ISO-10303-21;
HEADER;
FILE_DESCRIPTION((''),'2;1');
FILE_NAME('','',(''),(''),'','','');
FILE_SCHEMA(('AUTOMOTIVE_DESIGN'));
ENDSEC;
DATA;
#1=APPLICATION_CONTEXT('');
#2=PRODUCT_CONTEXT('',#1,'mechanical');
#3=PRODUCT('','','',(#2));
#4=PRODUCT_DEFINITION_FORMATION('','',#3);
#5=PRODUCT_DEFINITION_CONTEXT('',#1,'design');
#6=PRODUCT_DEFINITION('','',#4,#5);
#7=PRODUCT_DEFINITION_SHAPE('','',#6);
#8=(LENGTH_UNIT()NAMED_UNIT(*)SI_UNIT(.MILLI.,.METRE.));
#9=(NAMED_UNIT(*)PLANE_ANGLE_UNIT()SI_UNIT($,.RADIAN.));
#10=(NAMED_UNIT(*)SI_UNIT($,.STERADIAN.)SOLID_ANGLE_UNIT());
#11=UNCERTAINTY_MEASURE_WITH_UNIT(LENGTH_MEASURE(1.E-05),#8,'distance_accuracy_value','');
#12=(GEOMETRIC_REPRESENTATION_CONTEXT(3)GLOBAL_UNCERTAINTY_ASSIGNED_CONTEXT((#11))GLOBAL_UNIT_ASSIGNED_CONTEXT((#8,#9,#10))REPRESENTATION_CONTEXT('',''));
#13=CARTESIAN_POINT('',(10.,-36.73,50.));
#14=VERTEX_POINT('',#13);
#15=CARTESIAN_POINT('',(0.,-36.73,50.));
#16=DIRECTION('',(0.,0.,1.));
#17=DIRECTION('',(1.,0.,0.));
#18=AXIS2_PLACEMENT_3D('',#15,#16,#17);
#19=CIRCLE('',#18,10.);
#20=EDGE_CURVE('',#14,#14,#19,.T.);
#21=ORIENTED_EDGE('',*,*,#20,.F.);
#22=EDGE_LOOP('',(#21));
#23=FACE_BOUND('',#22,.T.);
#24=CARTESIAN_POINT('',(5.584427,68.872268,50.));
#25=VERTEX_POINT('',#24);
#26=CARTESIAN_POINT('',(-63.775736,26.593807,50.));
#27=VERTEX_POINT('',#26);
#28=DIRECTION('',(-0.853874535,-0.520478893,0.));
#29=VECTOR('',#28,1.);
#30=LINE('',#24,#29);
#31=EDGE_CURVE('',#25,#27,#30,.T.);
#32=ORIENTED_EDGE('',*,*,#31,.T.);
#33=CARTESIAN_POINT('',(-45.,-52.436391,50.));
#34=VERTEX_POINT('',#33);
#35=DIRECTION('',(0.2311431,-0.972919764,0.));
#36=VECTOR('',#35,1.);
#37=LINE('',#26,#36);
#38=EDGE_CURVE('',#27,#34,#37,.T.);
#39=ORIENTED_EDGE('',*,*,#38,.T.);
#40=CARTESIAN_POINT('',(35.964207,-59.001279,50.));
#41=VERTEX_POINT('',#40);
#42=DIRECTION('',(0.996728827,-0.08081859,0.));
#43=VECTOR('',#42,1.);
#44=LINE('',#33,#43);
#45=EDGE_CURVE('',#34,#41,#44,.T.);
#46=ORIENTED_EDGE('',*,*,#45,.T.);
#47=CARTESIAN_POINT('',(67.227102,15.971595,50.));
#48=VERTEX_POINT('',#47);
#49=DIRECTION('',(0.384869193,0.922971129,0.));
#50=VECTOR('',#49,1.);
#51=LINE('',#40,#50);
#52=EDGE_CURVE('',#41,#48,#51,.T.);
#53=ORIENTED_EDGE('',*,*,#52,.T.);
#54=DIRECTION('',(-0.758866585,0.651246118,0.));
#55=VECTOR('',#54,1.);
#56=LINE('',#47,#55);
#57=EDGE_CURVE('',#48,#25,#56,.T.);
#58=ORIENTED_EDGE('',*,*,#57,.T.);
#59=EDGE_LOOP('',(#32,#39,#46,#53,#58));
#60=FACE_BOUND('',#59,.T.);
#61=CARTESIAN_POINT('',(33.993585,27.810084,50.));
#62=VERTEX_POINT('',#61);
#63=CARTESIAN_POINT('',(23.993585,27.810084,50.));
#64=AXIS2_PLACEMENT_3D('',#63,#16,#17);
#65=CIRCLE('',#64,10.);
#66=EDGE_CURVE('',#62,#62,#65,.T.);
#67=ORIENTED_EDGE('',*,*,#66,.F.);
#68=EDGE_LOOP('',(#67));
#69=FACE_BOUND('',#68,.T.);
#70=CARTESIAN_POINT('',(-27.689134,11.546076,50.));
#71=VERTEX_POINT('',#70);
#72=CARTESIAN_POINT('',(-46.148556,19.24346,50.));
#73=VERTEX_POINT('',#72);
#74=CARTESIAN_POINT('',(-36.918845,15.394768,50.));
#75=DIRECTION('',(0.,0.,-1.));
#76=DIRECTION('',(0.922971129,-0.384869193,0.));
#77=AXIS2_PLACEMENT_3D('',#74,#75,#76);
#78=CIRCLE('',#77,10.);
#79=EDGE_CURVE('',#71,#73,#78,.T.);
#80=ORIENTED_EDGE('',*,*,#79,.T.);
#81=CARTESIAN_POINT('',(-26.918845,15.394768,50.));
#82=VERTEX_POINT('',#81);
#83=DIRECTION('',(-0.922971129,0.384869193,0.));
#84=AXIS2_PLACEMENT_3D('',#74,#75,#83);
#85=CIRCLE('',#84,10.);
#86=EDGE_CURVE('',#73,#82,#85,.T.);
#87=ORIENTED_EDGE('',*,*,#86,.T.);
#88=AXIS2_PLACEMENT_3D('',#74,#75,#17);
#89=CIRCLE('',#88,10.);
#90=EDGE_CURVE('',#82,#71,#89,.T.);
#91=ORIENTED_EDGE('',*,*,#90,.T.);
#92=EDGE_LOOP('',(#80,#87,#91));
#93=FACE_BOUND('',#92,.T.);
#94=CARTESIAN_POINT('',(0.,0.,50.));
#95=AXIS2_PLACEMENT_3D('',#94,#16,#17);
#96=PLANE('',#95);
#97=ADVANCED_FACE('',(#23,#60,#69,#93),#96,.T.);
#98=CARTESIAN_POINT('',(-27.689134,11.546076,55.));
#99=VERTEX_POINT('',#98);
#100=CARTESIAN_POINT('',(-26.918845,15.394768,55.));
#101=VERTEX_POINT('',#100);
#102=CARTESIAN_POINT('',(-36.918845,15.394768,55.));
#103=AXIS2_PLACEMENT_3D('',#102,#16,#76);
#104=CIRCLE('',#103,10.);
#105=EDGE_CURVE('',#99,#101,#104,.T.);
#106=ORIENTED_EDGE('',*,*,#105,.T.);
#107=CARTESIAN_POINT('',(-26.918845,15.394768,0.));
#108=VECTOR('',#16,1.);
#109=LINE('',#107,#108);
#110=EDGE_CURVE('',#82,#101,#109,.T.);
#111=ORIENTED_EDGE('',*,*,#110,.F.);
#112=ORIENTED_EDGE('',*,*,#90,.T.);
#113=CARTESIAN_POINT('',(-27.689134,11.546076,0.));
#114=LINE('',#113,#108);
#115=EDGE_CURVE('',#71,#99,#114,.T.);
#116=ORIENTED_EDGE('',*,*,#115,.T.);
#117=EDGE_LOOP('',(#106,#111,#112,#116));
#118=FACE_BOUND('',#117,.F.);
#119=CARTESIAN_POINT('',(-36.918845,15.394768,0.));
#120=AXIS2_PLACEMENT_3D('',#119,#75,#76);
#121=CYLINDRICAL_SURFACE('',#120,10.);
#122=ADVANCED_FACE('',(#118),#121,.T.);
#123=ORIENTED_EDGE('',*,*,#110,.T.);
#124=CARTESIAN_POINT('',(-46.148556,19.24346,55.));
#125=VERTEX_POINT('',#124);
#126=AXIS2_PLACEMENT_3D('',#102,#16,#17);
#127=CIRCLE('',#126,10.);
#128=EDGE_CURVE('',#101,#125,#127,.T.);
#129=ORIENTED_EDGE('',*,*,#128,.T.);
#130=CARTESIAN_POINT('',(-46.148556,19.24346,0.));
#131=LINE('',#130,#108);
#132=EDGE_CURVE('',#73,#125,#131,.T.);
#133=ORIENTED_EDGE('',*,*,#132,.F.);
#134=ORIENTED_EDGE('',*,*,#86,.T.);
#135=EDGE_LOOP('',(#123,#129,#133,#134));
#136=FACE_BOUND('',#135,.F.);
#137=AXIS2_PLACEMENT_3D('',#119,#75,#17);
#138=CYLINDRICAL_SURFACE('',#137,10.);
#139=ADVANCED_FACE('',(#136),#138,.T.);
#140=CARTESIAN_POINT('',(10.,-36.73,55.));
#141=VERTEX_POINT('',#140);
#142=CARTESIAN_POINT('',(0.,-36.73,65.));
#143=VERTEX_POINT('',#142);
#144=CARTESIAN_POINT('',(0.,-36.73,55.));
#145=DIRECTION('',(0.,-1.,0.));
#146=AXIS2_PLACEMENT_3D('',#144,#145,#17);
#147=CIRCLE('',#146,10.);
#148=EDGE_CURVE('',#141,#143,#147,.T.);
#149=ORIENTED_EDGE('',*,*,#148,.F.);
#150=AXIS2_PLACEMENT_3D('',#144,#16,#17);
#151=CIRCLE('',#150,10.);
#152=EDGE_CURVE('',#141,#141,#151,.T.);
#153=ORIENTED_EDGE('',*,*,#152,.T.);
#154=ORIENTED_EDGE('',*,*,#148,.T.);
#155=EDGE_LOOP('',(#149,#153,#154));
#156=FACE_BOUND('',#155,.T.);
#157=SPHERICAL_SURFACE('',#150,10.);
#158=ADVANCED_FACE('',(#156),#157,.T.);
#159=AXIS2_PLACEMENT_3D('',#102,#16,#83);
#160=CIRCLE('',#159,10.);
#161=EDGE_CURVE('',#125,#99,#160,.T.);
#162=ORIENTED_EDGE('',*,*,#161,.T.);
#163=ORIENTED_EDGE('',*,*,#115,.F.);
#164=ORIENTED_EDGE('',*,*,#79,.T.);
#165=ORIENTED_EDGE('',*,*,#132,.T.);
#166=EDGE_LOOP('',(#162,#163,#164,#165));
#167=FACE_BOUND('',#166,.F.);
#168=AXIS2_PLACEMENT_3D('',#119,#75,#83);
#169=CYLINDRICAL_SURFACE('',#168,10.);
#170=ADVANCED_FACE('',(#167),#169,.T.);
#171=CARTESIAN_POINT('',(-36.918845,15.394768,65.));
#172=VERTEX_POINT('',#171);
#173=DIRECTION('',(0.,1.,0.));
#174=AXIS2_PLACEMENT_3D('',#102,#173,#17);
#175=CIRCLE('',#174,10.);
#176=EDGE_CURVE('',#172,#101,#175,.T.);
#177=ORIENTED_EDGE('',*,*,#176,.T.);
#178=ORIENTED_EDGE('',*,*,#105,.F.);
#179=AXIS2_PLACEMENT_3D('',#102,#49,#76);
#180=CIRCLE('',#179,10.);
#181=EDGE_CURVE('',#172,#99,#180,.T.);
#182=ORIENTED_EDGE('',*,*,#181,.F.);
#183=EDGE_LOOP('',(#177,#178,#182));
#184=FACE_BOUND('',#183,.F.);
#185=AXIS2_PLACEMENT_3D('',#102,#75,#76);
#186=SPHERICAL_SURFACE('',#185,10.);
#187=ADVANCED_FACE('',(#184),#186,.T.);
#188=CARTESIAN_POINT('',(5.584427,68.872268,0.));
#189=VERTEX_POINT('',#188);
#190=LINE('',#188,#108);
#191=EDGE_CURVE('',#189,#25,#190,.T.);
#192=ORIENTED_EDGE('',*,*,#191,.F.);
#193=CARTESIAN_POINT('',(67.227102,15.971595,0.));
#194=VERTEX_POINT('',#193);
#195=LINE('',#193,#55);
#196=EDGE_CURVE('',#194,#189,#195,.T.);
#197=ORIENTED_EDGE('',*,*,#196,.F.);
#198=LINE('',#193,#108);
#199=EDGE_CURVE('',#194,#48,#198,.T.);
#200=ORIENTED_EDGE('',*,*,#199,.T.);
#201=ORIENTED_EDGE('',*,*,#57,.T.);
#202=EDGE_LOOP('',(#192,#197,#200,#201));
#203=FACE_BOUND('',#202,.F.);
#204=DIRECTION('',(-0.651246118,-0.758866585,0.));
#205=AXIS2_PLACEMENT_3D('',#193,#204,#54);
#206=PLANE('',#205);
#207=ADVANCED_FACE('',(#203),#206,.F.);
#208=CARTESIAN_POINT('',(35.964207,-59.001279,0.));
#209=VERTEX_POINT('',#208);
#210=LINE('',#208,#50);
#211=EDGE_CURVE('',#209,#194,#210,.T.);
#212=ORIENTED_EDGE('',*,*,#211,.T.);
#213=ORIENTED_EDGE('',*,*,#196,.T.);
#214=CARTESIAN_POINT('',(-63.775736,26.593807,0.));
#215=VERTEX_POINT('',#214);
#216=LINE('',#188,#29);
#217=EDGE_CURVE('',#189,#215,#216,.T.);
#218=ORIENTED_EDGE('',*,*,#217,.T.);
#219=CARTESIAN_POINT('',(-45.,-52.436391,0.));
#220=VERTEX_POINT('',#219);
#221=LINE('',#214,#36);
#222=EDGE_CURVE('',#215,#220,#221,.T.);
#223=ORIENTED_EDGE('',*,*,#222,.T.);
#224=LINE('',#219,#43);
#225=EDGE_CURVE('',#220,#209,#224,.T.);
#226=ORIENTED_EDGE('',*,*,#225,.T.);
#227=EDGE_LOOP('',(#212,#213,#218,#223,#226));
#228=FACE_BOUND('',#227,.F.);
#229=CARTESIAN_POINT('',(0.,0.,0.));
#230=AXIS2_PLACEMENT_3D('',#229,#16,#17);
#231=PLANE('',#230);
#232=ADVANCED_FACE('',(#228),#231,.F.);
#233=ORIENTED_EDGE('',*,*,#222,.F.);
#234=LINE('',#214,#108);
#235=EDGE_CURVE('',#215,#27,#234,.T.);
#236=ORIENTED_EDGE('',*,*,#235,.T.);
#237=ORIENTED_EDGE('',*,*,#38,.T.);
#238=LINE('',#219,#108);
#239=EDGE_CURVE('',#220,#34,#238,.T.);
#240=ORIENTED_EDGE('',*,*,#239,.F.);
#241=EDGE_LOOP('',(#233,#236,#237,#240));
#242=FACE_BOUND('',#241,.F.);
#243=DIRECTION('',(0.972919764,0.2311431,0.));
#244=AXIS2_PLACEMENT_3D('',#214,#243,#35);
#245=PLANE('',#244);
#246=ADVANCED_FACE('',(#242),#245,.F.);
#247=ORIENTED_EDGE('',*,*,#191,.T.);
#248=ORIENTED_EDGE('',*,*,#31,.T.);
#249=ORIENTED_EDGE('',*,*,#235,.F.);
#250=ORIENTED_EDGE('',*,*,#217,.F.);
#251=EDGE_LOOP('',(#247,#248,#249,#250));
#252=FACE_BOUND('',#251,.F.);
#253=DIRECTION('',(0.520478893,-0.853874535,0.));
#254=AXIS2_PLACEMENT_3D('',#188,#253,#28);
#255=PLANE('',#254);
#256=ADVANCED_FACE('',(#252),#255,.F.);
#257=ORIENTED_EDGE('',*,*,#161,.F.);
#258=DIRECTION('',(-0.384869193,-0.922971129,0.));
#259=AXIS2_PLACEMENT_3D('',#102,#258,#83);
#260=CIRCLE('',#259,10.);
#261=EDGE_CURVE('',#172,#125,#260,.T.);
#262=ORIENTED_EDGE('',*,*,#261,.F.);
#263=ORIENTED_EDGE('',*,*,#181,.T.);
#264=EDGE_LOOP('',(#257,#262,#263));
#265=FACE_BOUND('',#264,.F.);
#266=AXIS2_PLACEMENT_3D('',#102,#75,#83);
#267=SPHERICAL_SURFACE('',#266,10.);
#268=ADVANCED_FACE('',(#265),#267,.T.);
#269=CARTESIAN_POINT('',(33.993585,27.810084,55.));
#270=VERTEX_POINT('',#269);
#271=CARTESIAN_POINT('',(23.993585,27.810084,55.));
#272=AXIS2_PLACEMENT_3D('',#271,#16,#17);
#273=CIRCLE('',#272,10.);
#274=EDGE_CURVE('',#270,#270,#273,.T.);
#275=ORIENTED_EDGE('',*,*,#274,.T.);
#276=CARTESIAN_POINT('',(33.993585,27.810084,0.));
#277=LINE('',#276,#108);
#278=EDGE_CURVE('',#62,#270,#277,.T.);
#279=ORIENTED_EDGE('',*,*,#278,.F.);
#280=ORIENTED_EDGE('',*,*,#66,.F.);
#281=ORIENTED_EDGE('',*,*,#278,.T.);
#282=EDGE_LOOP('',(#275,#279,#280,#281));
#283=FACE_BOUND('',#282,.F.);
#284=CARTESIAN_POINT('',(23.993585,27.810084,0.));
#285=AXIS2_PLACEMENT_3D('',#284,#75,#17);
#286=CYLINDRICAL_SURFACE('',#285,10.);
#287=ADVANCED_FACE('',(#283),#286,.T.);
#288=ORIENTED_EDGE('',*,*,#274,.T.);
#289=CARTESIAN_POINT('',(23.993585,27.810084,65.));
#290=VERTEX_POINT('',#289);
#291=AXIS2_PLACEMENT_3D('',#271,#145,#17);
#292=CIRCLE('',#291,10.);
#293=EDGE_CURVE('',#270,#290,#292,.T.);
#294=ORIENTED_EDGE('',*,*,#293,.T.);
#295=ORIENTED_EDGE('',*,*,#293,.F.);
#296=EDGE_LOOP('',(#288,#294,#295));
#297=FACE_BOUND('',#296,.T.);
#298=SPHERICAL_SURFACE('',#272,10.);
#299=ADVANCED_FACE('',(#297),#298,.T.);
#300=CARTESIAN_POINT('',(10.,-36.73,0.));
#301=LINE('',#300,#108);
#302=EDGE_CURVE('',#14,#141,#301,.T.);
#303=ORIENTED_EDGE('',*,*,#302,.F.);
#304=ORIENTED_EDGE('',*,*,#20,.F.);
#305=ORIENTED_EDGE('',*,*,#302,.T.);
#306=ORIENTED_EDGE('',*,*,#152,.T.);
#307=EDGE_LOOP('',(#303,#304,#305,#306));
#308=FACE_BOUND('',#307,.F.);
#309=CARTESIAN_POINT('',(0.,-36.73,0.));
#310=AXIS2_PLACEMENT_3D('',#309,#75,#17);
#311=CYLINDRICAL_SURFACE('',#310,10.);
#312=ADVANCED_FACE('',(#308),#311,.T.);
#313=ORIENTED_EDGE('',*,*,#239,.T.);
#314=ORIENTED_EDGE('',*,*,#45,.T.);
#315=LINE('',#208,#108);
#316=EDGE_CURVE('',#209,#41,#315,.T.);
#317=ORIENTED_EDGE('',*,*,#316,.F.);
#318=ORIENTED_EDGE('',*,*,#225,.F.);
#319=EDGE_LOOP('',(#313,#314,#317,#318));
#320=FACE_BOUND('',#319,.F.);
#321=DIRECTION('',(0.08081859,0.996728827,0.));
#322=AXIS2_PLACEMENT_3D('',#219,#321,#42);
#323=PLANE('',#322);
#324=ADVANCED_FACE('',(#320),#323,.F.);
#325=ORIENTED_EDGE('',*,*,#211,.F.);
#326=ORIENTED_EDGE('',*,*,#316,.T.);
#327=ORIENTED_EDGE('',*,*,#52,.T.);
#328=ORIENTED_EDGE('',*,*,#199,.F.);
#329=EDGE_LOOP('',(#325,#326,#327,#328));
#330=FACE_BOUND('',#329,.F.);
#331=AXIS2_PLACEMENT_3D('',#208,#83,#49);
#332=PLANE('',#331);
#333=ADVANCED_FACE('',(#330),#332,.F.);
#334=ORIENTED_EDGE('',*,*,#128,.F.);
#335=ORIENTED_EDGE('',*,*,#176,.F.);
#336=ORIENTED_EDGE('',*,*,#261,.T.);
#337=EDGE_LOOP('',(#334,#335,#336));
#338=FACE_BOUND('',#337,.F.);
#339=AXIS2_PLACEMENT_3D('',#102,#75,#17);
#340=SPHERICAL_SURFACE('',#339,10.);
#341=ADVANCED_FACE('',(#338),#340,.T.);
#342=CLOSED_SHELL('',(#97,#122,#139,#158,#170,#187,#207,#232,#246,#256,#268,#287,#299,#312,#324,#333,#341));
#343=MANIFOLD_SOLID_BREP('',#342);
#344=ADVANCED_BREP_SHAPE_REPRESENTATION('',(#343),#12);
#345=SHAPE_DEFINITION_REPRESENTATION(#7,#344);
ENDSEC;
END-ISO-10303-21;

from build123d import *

# Parameters (mm, degrees)
F0_R     = 10
F1_DEPTH = 50
F2_DEPTH = 65
F3_R     = 10


with BuildPart() as f1:
    # F0 (on Top) → F1 (new body)
    with BuildSketch(Plane.XY):
        Polygon((35.9642069631, -59.0012792924), (67.2271022816, 15.9715953944), (5.5844272121, 68.8722681007), (-63.7757364568, 26.5938071741), (-45, -52.4363913769), align=None)
        with Locations((0, -36.73)):
            Circle(F0_R, mode=Mode.SUBTRACT)
        with BuildLine():
            ThreePointArc((-27.689133859, 11.5460757896), (-40.7675370752, 6.1650564331), (-46.1485564317, 19.2434596493))
            ThreePointArc((-46.1485564317, 19.2434596493), (-34.9563356375, 25.2003047486), (-26.9188451453, 15.3947677194))
            ThreePointArc((-26.9188451453, 15.3947677194), (-27.1133081161, 13.4322582116), (-27.689133859, 11.5460757896))
        make_face(mode=Mode.SUBTRACT)
        with Locations((23.9935845951, 27.8100844709)):
            Circle(F0_R, mode=Mode.SUBTRACT)
    extrude(amount=F1_DEPTH)

    # F0 (on Top) → F2 (join)
    with BuildSketch(Plane.XY):
        with BuildLine():
            Line((-27.689133859, 11.5460757896), (-46.1485564317, 19.2434596493))
            ThreePointArc((-46.1485564317, 19.2434596493), (-40.7675370752, 6.1650564331), (-27.689133859, 11.5460757896))
        make_face()
        with BuildLine():
            ThreePointArc((-26.9188451453, 15.3947677194), (-34.9563356375, 25.2003047486), (-46.1485564317, 19.2434596493))
            Line((-46.1485564317, 19.2434596493), (-27.689133859, 11.5460757896))
            ThreePointArc((-27.689133859, 11.5460757896), (-27.1133081161, 13.4322582116), (-26.9188451453, 15.3947677194))
        make_face()
        with Locations((23.9935845951, 27.8100844709)):
            Circle(F0_R)
        with Locations((0, -36.73)):
            Circle(F0_R)
    extrude(amount=F2_DEPTH)

    # F3
    f3_edges = [f1.edges().sort_by_distance(p)[0] for p in [
        (-46.148556, 19.24346, 65),
        (-10, -36.73, 65),
        (13.993585, 27.810084, 65),
    ]]
    fillet(f3_edges, radius=F3_R)


solid = f1.part
